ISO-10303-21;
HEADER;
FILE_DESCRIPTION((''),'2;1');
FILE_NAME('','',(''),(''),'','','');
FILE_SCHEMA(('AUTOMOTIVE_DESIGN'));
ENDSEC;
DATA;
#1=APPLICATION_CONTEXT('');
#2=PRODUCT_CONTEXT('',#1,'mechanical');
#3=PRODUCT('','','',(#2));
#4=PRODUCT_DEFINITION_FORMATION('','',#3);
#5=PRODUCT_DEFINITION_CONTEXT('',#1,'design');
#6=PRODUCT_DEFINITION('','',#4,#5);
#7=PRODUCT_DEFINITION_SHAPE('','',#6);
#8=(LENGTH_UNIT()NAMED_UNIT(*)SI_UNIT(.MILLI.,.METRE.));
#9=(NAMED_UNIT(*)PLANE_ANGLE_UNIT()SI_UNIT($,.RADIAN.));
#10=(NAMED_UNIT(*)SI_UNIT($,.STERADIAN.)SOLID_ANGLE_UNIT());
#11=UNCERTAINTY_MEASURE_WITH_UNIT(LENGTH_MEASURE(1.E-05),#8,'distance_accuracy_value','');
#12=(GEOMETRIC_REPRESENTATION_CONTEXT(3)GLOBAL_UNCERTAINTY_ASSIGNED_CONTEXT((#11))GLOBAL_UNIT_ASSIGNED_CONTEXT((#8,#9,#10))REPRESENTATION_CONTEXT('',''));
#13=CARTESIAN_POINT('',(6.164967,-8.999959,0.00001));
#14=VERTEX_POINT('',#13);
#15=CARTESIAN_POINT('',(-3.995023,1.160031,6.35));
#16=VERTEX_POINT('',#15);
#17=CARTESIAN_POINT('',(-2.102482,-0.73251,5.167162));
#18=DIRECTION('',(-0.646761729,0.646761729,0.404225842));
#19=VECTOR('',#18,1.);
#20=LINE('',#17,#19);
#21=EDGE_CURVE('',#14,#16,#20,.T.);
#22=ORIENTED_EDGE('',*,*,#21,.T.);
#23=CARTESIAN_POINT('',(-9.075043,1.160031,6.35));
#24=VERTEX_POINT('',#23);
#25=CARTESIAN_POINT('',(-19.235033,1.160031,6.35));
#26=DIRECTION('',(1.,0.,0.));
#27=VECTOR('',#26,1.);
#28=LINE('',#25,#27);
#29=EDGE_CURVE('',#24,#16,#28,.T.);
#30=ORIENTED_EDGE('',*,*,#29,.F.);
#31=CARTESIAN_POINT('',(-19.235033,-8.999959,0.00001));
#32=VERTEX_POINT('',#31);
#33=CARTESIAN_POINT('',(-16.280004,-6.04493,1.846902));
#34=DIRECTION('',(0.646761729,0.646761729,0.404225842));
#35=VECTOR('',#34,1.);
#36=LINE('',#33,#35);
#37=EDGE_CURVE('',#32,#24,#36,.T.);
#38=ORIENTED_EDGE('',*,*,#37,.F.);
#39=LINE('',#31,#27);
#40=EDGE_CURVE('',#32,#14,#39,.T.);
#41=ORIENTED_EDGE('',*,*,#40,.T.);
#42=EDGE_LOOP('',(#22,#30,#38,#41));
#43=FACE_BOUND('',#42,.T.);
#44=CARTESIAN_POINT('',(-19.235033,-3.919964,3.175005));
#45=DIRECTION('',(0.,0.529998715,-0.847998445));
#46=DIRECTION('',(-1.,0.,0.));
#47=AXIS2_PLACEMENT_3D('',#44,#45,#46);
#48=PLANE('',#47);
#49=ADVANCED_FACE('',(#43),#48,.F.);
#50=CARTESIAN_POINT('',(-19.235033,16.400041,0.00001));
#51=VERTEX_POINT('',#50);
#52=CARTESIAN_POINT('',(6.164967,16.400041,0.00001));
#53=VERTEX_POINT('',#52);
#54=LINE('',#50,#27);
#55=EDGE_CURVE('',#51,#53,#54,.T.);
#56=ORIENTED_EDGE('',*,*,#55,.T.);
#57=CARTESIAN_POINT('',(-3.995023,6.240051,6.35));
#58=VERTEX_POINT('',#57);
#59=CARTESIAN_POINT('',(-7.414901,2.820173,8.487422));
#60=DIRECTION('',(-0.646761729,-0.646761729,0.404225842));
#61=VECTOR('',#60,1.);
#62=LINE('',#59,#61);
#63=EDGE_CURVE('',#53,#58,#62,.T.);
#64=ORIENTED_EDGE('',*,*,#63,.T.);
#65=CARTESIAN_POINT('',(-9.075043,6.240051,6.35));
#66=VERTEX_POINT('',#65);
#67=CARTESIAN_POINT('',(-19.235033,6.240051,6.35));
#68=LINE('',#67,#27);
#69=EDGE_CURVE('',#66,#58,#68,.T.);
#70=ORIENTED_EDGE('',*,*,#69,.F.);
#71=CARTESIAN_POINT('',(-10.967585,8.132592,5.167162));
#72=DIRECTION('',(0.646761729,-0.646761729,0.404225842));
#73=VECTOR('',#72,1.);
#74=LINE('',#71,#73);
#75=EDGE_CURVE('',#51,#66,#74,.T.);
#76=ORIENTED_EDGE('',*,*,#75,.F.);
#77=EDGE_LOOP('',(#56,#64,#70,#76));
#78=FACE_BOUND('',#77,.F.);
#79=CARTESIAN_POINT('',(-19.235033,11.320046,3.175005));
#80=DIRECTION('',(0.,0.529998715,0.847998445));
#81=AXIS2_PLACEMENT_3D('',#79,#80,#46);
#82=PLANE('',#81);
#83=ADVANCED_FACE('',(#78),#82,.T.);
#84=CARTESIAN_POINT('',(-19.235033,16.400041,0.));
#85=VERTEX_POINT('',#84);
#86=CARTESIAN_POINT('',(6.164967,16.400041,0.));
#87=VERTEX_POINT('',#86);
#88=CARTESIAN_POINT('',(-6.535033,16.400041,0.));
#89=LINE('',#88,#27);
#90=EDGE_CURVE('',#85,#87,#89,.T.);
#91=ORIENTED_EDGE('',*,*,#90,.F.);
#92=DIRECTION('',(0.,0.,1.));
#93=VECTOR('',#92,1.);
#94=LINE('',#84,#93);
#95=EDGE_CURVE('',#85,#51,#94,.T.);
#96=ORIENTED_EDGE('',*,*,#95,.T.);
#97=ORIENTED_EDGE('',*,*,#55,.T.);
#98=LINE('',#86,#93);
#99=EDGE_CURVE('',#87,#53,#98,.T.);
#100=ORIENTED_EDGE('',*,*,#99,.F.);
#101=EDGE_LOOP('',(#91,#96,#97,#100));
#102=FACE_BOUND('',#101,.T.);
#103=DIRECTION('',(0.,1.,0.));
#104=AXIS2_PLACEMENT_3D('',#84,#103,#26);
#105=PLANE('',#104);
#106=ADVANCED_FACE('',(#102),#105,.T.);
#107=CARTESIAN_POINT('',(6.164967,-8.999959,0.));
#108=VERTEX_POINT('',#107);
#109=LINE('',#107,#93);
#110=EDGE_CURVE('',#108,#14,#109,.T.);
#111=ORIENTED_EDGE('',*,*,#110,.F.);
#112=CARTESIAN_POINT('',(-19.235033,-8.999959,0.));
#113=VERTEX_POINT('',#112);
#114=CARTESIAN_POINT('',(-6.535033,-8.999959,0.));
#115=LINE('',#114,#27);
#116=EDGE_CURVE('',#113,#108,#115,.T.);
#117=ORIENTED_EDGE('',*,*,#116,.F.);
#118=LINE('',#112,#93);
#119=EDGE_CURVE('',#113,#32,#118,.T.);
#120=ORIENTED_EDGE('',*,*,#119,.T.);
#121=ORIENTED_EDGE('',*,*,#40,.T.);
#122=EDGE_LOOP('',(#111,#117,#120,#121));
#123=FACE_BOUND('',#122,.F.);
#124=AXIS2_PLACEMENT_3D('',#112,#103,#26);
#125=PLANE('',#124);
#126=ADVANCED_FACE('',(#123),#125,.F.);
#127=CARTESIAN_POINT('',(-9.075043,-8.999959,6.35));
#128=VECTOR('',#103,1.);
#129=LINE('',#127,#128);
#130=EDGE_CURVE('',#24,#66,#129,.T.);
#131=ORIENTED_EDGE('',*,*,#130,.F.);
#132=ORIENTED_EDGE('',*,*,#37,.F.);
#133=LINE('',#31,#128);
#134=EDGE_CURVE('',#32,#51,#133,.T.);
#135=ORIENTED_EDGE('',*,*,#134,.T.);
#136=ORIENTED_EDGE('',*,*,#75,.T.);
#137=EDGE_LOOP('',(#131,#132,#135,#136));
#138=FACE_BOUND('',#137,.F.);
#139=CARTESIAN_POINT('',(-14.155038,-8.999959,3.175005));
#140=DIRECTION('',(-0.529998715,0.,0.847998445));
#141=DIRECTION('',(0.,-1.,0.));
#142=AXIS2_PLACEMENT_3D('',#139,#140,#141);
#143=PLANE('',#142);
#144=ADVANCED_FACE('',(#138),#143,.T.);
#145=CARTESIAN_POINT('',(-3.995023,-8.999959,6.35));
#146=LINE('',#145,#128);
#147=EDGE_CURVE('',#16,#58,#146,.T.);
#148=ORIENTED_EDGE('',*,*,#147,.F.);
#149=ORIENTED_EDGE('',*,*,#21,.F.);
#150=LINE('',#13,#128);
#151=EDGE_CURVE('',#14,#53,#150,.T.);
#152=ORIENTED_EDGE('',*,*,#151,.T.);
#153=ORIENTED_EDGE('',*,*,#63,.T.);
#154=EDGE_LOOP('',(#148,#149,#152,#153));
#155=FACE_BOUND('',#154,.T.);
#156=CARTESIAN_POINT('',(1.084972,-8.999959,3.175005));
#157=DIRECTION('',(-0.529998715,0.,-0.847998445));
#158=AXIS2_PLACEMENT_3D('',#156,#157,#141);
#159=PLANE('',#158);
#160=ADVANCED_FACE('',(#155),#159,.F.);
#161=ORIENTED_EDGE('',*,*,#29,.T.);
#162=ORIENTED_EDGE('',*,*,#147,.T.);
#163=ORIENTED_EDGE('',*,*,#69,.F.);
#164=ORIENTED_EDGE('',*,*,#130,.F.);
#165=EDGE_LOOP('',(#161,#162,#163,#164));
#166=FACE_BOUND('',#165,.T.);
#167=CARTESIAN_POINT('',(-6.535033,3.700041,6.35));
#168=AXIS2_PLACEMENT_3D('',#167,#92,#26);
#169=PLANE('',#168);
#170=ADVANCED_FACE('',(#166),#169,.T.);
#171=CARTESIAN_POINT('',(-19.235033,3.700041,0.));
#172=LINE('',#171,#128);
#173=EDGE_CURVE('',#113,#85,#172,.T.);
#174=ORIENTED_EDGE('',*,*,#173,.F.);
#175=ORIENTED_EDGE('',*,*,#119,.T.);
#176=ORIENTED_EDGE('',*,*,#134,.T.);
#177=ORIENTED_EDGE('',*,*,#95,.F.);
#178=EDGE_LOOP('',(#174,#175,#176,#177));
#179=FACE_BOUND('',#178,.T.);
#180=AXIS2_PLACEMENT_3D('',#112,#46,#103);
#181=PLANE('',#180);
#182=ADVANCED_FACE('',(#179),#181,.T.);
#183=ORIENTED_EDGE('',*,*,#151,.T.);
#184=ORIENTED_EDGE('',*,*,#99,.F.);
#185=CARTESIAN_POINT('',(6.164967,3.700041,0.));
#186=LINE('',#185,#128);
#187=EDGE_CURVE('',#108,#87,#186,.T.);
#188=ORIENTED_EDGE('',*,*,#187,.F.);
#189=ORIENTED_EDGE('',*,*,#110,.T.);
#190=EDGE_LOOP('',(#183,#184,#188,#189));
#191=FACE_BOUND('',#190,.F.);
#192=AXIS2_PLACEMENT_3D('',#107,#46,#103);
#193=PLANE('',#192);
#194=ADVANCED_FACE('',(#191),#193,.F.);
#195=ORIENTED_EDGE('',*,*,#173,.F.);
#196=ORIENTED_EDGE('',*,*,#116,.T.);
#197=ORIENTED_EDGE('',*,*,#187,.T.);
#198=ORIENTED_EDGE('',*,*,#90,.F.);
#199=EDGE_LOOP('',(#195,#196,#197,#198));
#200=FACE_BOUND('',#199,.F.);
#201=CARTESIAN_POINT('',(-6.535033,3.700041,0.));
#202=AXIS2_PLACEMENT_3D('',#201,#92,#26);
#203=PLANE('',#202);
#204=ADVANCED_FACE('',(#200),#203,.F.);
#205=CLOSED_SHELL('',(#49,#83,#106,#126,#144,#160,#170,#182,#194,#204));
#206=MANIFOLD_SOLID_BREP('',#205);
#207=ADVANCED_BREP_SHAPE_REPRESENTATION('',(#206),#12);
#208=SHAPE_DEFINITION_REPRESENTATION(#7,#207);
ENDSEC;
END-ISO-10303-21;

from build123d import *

# Parameters (mm, degrees)
F0_W     = 25.4
F0_H     = 25.4
F1_DEPTH = 6.35
F2_SIZE2 = 10.15999
F2_SIZE  = 6.34999


# Not quite as in the source:
# - a fillet or chamfer is up to 0.001 mm smaller than in the source, because OpenCascade refuses the exact size


with BuildPart() as f1:
    # F0 (on Top) → F1 (new body)
    with BuildSketch(Plane.XY):
        with Locations((-6.5350332297, 3.7000408258)):
            Rectangle(F0_W, F0_H)
    extrude(amount=F1_DEPTH)

    # F2 (size 6.35 and 10.16 in the source; OpenCascade refuses exactly that, so slightly less here)
    f2_edges = [f1.edges().sort_by_distance(p)[0] for p in [
        (-6.535033, 16.400041, 6.35),
        (-19.235033, 3.700041, 6.35),
        (-6.535033, -8.999959, 6.35),
        (6.164967, 3.700041, 6.35),
    ]]
    chamfer(f2_edges, length=F2_SIZE, length2=F2_SIZE2)


solid = f1.part
